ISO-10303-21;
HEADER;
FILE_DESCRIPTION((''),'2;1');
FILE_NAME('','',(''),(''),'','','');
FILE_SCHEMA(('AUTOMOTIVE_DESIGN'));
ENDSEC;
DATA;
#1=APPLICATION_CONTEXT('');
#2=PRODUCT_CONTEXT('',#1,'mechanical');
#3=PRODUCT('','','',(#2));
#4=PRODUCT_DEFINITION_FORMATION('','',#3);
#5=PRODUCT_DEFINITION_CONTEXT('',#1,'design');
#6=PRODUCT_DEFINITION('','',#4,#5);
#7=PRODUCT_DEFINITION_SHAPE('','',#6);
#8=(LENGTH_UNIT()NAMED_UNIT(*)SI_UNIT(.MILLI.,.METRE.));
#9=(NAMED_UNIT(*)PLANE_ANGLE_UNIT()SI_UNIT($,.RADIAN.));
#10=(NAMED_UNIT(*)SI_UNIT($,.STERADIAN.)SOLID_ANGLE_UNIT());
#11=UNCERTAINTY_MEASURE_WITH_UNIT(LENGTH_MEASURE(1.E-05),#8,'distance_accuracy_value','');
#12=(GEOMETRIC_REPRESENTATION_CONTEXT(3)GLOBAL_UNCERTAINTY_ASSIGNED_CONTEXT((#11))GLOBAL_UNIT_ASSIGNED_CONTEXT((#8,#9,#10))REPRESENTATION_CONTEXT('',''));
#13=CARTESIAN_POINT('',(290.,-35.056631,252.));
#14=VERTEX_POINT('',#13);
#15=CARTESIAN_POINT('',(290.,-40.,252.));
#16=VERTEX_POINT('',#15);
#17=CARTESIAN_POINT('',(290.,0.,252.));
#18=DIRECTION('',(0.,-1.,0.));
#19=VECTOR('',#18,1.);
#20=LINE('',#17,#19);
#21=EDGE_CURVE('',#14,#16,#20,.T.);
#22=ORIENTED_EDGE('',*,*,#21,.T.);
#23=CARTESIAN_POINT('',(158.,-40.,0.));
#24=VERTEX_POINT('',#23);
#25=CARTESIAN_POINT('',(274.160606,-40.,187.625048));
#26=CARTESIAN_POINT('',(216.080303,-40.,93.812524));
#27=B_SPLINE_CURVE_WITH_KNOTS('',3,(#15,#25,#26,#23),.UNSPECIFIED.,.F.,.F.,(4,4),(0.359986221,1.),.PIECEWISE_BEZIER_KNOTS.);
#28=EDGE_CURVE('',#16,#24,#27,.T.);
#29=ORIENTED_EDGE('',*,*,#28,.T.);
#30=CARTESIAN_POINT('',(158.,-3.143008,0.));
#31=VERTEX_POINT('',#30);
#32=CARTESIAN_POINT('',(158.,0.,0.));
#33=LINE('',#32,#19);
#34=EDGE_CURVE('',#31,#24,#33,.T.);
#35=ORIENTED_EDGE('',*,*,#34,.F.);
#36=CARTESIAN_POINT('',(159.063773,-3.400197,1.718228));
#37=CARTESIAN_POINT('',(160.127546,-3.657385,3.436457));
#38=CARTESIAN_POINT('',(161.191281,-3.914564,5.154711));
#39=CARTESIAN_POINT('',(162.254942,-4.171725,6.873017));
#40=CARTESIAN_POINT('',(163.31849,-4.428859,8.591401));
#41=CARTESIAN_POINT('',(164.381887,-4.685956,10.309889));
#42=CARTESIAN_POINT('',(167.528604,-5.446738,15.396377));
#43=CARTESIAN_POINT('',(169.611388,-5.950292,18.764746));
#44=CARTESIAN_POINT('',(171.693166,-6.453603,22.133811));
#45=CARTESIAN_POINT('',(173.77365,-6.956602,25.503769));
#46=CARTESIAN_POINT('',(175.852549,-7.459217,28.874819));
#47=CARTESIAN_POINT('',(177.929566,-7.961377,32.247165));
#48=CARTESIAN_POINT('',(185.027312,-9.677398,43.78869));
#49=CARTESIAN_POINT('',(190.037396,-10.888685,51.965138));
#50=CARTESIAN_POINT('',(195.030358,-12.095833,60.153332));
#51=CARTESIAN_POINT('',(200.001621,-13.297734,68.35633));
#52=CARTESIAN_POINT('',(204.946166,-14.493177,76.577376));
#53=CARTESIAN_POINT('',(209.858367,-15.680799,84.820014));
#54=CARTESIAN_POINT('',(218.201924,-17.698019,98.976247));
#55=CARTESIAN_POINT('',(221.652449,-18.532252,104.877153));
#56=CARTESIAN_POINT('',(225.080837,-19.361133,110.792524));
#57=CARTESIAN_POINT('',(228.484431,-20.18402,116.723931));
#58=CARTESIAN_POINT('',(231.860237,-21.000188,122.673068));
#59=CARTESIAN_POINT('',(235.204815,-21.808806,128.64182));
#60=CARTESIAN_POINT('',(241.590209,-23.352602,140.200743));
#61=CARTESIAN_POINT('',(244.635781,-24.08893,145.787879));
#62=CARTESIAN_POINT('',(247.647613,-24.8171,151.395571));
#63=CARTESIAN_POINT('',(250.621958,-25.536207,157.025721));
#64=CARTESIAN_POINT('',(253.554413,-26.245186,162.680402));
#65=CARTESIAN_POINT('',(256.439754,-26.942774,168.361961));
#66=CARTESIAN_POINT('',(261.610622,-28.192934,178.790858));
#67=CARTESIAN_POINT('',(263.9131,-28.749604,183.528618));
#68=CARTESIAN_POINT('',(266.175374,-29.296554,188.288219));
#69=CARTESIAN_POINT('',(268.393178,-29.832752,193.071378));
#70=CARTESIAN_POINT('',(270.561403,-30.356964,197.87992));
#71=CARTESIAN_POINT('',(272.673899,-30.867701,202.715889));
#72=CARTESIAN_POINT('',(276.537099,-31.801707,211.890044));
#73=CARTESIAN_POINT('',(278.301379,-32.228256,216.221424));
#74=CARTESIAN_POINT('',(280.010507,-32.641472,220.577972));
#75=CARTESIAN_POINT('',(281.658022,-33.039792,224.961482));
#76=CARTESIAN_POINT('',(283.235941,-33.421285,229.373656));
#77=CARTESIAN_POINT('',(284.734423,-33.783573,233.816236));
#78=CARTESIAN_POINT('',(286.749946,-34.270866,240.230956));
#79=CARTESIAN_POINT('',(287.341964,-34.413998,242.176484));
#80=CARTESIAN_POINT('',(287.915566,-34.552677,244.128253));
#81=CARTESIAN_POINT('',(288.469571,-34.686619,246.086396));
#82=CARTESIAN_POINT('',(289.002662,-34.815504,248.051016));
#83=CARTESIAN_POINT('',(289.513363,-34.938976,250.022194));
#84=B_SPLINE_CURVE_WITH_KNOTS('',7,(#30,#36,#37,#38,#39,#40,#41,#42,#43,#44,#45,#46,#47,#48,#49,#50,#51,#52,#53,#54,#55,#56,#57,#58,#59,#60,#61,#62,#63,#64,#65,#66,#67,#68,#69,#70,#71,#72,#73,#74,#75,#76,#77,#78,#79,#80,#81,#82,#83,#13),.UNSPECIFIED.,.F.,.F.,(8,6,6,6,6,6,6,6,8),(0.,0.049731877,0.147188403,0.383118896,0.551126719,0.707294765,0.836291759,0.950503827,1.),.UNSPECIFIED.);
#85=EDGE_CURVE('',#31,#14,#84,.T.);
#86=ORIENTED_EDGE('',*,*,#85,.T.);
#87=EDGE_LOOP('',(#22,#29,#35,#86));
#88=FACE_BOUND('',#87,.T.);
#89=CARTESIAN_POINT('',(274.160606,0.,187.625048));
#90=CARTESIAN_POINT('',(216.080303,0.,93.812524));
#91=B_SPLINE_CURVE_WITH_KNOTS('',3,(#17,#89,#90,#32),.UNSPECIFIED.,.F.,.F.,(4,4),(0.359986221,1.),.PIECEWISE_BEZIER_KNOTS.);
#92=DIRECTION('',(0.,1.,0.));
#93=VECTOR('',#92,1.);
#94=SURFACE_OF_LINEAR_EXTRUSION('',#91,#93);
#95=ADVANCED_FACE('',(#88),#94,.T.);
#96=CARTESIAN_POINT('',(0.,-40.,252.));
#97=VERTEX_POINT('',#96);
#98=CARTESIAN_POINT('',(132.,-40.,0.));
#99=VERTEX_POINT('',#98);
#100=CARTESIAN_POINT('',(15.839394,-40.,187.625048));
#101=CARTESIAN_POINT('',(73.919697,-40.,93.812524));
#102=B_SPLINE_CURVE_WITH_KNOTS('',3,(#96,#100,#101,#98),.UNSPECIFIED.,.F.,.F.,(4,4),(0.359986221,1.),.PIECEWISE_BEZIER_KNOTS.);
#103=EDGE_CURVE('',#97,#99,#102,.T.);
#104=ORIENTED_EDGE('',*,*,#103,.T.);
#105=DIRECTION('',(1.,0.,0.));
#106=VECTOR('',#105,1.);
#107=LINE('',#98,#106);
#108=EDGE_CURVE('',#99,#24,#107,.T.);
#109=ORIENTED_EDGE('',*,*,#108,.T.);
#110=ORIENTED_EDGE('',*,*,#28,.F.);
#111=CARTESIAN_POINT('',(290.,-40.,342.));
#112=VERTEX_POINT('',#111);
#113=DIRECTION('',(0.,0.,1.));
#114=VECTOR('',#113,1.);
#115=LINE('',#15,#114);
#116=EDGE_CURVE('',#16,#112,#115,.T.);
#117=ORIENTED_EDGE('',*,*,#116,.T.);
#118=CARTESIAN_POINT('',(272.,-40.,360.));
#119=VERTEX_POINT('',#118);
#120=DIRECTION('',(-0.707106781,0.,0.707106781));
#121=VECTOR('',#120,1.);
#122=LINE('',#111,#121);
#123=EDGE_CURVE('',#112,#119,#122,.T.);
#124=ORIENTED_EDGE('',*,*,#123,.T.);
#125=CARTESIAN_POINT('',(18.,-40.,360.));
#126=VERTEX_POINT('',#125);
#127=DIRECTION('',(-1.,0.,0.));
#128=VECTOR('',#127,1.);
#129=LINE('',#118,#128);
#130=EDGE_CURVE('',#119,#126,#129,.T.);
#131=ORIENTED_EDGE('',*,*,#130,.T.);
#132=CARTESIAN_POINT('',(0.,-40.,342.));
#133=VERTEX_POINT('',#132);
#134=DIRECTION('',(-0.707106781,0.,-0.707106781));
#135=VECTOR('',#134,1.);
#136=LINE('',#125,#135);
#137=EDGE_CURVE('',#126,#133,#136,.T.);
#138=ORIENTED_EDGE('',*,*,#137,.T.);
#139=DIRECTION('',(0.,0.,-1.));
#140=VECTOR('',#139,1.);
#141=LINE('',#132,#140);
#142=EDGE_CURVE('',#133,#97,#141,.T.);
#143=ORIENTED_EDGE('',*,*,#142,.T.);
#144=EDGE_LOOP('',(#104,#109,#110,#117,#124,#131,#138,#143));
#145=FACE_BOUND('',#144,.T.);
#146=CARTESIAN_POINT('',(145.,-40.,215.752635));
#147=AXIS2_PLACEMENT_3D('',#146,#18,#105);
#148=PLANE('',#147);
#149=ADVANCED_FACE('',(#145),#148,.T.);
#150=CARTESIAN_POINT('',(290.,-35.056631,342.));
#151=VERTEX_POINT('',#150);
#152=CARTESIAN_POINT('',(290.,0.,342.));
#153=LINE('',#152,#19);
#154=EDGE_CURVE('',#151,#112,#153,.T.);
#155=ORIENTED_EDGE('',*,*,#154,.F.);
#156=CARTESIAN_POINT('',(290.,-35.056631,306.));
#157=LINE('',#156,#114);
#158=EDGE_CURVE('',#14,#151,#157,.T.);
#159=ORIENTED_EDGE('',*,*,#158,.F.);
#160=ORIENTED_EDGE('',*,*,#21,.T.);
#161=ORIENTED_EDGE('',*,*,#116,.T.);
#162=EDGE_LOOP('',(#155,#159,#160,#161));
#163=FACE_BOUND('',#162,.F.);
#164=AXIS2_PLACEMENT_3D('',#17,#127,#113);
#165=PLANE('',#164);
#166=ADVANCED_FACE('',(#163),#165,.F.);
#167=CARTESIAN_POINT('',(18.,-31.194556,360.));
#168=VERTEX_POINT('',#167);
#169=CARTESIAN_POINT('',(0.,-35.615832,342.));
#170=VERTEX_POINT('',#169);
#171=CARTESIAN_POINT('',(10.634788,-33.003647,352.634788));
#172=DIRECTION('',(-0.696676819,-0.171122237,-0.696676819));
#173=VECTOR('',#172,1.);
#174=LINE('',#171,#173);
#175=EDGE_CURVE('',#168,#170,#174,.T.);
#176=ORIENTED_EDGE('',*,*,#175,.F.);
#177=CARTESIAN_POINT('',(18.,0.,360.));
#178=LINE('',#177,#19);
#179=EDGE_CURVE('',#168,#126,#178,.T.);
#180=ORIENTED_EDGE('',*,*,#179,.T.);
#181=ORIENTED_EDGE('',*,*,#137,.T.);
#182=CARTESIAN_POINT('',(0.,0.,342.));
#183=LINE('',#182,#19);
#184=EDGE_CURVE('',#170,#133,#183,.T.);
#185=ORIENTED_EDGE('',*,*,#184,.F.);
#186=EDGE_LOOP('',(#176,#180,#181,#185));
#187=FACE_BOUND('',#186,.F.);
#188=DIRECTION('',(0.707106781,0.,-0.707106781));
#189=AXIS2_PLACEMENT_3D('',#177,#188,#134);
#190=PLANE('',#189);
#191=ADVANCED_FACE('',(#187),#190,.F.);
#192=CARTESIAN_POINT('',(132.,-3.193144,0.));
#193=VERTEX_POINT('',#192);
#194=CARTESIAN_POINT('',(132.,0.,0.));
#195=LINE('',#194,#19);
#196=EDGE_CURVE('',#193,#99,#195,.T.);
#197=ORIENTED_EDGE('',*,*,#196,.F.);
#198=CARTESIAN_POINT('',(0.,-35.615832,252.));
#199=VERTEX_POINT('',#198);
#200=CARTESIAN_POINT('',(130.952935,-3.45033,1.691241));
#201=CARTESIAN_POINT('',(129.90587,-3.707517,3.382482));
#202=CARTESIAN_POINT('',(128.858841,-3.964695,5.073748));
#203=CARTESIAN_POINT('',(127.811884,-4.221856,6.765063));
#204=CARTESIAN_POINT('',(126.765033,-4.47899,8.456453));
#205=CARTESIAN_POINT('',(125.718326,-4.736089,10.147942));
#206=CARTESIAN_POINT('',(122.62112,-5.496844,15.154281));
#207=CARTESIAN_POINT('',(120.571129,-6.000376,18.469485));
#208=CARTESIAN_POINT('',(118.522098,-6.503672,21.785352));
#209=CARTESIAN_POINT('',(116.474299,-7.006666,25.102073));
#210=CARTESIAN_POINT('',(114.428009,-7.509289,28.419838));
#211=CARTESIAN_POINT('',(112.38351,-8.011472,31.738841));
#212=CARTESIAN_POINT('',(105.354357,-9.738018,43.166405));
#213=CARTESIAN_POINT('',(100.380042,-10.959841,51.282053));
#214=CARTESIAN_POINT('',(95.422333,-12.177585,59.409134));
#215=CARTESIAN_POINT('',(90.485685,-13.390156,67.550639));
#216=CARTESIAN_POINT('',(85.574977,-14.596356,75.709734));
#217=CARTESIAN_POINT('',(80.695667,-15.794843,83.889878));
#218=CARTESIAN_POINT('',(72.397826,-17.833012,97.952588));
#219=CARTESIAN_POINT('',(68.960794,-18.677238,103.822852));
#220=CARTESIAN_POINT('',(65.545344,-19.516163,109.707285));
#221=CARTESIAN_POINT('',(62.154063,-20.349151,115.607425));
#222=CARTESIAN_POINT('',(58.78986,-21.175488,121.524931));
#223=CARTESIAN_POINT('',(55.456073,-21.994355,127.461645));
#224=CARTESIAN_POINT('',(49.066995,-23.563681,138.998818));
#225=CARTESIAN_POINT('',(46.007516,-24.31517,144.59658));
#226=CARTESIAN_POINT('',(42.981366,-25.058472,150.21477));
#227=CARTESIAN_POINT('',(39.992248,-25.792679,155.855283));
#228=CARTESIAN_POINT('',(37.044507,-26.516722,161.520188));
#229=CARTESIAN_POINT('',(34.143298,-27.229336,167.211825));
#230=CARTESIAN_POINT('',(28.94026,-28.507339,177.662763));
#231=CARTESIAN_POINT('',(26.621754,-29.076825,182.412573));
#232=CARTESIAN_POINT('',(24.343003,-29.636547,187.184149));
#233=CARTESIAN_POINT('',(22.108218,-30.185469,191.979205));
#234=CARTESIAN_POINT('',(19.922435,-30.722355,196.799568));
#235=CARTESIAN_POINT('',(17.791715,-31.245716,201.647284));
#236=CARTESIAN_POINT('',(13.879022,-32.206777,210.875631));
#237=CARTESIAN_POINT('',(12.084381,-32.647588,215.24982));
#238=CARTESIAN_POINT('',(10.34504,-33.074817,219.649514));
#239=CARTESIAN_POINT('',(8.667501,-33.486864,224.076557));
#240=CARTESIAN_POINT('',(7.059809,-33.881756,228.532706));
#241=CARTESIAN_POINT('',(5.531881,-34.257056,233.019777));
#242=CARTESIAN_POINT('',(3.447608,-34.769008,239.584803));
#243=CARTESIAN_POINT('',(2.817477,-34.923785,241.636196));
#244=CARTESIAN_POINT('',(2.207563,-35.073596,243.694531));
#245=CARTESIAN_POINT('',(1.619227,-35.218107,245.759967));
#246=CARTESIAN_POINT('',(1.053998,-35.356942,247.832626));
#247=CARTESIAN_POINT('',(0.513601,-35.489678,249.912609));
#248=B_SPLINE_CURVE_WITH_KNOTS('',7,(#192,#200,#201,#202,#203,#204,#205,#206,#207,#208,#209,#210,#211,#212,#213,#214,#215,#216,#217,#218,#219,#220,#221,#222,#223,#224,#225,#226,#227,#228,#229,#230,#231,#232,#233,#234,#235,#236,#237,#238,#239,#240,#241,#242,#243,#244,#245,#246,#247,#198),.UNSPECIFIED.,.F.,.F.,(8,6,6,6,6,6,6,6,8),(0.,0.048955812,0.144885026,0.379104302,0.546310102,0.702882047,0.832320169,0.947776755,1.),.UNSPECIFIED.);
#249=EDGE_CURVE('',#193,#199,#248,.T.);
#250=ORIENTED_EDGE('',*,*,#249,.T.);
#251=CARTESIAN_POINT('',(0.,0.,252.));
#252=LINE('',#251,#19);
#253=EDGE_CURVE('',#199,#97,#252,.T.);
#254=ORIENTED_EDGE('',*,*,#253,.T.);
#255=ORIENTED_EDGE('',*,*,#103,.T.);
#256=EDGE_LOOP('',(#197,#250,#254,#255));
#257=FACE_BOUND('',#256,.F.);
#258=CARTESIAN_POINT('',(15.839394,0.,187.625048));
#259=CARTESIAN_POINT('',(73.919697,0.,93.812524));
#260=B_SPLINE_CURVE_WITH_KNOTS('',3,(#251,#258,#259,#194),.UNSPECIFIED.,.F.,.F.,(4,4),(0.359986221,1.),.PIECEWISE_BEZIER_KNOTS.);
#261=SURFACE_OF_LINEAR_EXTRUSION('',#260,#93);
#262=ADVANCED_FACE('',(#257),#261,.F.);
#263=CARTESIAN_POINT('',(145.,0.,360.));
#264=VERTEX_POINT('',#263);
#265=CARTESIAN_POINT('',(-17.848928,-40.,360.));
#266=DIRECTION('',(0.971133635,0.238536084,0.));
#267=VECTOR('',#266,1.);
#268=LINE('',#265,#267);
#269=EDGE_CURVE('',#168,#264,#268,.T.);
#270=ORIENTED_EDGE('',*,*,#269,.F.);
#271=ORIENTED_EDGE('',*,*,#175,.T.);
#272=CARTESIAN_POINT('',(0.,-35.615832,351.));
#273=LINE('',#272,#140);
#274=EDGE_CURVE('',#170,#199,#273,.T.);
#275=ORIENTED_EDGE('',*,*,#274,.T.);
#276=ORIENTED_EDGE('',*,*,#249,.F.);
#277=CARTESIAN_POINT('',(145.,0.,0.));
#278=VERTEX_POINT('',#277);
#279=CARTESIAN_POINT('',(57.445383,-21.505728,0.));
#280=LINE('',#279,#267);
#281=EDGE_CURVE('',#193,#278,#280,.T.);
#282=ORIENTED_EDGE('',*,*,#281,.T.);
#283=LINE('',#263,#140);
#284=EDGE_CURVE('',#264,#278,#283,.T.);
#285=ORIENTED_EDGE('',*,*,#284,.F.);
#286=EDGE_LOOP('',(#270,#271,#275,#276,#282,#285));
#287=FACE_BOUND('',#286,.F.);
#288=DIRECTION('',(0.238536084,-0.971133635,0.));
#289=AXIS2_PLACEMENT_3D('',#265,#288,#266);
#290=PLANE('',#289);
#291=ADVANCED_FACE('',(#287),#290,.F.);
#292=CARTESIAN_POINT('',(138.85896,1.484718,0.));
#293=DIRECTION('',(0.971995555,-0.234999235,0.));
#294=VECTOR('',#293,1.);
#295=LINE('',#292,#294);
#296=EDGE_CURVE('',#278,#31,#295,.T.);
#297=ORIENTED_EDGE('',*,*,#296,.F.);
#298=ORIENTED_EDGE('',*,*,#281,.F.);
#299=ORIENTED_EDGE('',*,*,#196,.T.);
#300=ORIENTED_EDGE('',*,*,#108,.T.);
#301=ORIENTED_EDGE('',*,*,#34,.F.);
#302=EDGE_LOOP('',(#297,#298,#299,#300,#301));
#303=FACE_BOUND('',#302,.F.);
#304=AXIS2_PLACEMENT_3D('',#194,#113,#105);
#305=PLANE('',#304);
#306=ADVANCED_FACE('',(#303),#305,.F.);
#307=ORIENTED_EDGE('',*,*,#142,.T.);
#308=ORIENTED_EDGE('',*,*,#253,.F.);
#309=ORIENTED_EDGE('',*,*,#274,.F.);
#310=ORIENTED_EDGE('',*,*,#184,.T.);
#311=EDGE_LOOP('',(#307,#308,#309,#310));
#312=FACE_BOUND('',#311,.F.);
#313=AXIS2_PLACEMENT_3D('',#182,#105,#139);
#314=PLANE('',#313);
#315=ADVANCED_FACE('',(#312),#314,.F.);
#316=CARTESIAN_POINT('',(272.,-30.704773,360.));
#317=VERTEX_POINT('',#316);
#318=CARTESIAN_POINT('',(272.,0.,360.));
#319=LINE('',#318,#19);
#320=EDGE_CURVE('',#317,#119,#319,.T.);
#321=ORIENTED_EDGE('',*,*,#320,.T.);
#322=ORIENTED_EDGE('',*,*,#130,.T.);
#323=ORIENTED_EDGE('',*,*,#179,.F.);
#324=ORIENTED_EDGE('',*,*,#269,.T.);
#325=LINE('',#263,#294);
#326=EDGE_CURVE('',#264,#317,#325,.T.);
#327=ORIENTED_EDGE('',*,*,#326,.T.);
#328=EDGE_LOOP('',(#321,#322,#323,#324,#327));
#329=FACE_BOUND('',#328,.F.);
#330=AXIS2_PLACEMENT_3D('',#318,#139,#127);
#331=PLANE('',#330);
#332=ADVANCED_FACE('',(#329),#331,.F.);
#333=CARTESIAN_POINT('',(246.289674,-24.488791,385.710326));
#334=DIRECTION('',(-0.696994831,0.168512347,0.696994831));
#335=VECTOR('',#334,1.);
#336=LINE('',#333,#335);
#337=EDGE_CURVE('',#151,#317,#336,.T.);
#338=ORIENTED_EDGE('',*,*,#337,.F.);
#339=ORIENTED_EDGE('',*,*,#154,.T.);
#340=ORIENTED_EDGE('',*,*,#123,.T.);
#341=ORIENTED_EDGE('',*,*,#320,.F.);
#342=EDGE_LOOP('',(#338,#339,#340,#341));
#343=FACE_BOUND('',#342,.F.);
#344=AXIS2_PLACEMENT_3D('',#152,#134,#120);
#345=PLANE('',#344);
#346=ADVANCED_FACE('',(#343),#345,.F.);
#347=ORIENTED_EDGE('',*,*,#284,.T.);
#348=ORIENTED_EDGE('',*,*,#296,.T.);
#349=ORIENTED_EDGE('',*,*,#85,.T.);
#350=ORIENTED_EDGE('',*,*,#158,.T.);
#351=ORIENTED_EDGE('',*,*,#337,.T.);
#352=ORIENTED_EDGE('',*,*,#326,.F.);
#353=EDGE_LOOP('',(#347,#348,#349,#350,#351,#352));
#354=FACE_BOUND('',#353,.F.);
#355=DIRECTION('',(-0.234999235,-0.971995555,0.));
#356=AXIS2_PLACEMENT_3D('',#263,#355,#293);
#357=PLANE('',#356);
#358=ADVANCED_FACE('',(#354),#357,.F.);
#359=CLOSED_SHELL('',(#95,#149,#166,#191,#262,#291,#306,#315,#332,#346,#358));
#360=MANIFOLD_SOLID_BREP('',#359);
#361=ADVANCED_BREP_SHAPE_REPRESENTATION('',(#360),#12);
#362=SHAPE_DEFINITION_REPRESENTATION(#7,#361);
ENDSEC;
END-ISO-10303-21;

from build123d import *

# Parameters (mm, degrees)
F1_DEPTH = 40
F3_DEPTH = 494


with BuildPart() as f1:
    # F0 (on Front) → F1 (new body)
    with BuildSketch(Plane.XZ):
        with BuildLine():
            add(Edge.make_bspline(
                [(0, 252), (15.8393937026, 187.6250477101), (73.9196968513, 93.8125238551), (132, 0)],
                knots=[0.3599862205, 0.3599862205, 0.3599862205, 0.3599862205, 1, 1, 1, 1], degree=3))
            Line((132, 0), (158, 0))
            add(Edge.make_bspline(
                [(290, 252), (274.1606062974, 187.6250477101), (216.0803031487, 93.8125238551), (158, 0)],
                knots=[0.3599862205, 0.3599862205, 0.3599862205, 0.3599862205, 1, 1, 1, 1], degree=3))
            Line((290, 252), (290, 342))
            Line((290, 342), (272, 360))
            Line((272, 360), (18, 360))
            Line((18, 360), (0, 342))
            Line((0, 342), (0, 252))
        make_face()
    extrude(amount=F1_DEPTH)

    # F2 (on face) → F3 (cut)
    with BuildSketch(Plane.XY.offset(360)):
        Polygon((-17.8489275277, 46.4588217437), (-17.8489275277, -40), (145, 0), (310.4465901852, -40), (307.7366054058, 46.4588217437), align=None)
    extrude(amount=-F3_DEPTH, mode=Mode.SUBTRACT)


solid = f1.part
